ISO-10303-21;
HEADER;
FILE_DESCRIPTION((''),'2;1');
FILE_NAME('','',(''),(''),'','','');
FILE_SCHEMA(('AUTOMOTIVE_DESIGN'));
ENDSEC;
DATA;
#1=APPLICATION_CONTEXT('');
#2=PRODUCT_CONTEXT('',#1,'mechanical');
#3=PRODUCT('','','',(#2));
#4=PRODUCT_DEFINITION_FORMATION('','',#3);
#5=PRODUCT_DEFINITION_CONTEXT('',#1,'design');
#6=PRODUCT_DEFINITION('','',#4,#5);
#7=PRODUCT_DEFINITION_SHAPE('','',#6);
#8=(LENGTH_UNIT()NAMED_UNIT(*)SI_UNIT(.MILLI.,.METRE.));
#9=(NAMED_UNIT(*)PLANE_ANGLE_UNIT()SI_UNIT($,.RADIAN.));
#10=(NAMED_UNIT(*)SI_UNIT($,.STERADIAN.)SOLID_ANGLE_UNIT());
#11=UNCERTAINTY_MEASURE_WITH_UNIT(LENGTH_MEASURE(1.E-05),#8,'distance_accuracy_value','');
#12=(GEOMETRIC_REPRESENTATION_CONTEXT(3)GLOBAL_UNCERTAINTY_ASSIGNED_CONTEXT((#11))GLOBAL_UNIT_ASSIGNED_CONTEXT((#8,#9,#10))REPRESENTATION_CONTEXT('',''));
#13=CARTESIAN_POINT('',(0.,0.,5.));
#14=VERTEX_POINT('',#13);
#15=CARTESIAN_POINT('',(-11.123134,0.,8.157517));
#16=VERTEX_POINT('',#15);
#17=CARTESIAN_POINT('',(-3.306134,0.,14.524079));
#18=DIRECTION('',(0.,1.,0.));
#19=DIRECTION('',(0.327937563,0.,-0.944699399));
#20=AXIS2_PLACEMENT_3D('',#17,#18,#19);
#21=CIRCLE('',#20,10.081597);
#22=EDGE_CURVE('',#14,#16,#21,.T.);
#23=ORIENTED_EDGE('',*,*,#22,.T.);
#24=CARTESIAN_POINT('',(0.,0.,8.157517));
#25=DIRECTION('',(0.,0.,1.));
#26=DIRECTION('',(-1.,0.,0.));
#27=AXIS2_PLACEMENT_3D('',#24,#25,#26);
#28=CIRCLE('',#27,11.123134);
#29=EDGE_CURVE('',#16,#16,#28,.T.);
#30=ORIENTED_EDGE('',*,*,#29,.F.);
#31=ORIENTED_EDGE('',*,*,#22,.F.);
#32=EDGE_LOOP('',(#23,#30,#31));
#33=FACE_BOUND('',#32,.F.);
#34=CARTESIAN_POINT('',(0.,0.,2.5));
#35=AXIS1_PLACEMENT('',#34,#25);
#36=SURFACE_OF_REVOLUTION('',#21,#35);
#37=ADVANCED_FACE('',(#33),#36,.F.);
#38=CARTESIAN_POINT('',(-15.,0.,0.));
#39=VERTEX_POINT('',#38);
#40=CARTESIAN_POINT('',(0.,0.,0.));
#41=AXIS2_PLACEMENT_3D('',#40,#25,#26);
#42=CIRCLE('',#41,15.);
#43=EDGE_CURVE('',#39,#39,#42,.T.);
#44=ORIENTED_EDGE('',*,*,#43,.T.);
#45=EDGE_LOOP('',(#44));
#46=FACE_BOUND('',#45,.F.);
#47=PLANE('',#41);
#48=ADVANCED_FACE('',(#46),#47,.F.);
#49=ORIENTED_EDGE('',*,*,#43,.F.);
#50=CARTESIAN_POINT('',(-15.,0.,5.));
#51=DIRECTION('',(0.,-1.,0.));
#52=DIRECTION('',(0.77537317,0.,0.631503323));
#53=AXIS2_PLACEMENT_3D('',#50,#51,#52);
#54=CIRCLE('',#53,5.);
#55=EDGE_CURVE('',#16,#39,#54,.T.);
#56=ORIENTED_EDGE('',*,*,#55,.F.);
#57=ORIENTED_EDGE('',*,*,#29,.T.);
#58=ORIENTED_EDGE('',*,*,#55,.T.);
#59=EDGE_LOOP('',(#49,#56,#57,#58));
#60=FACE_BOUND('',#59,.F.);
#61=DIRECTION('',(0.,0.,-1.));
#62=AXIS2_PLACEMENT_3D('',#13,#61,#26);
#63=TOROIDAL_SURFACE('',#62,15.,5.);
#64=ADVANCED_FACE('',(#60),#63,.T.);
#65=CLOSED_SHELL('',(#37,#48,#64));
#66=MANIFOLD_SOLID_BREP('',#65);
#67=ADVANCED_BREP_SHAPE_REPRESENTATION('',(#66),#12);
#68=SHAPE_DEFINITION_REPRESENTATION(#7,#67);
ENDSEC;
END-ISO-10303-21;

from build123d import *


# Not quite as in the source:
# - a feature of the source that left no trace in its solid (it failed there, or was rolled back) is left out


with BuildPart() as f1:
    # F0 (on Front) → F1 (revolve)
    with BuildSketch(Plane.XZ):
        with BuildLine():
            ThreePointArc((0, 5), (-6.0592152712, 4.825669304), (-11.1231341484, 8.1575166142))
            ThreePointArc((-11.1231341484, 8.1575166142), (-19.5159485754, 7.1462079267), (-15, 0))
            Line((-15, 0), (0, 0))
            Line((0, 0), (0, 5))
        make_face()
    revolve(axis=Axis((0, 0, 2.5), (0, 0, 1)))


solid = f1.part
